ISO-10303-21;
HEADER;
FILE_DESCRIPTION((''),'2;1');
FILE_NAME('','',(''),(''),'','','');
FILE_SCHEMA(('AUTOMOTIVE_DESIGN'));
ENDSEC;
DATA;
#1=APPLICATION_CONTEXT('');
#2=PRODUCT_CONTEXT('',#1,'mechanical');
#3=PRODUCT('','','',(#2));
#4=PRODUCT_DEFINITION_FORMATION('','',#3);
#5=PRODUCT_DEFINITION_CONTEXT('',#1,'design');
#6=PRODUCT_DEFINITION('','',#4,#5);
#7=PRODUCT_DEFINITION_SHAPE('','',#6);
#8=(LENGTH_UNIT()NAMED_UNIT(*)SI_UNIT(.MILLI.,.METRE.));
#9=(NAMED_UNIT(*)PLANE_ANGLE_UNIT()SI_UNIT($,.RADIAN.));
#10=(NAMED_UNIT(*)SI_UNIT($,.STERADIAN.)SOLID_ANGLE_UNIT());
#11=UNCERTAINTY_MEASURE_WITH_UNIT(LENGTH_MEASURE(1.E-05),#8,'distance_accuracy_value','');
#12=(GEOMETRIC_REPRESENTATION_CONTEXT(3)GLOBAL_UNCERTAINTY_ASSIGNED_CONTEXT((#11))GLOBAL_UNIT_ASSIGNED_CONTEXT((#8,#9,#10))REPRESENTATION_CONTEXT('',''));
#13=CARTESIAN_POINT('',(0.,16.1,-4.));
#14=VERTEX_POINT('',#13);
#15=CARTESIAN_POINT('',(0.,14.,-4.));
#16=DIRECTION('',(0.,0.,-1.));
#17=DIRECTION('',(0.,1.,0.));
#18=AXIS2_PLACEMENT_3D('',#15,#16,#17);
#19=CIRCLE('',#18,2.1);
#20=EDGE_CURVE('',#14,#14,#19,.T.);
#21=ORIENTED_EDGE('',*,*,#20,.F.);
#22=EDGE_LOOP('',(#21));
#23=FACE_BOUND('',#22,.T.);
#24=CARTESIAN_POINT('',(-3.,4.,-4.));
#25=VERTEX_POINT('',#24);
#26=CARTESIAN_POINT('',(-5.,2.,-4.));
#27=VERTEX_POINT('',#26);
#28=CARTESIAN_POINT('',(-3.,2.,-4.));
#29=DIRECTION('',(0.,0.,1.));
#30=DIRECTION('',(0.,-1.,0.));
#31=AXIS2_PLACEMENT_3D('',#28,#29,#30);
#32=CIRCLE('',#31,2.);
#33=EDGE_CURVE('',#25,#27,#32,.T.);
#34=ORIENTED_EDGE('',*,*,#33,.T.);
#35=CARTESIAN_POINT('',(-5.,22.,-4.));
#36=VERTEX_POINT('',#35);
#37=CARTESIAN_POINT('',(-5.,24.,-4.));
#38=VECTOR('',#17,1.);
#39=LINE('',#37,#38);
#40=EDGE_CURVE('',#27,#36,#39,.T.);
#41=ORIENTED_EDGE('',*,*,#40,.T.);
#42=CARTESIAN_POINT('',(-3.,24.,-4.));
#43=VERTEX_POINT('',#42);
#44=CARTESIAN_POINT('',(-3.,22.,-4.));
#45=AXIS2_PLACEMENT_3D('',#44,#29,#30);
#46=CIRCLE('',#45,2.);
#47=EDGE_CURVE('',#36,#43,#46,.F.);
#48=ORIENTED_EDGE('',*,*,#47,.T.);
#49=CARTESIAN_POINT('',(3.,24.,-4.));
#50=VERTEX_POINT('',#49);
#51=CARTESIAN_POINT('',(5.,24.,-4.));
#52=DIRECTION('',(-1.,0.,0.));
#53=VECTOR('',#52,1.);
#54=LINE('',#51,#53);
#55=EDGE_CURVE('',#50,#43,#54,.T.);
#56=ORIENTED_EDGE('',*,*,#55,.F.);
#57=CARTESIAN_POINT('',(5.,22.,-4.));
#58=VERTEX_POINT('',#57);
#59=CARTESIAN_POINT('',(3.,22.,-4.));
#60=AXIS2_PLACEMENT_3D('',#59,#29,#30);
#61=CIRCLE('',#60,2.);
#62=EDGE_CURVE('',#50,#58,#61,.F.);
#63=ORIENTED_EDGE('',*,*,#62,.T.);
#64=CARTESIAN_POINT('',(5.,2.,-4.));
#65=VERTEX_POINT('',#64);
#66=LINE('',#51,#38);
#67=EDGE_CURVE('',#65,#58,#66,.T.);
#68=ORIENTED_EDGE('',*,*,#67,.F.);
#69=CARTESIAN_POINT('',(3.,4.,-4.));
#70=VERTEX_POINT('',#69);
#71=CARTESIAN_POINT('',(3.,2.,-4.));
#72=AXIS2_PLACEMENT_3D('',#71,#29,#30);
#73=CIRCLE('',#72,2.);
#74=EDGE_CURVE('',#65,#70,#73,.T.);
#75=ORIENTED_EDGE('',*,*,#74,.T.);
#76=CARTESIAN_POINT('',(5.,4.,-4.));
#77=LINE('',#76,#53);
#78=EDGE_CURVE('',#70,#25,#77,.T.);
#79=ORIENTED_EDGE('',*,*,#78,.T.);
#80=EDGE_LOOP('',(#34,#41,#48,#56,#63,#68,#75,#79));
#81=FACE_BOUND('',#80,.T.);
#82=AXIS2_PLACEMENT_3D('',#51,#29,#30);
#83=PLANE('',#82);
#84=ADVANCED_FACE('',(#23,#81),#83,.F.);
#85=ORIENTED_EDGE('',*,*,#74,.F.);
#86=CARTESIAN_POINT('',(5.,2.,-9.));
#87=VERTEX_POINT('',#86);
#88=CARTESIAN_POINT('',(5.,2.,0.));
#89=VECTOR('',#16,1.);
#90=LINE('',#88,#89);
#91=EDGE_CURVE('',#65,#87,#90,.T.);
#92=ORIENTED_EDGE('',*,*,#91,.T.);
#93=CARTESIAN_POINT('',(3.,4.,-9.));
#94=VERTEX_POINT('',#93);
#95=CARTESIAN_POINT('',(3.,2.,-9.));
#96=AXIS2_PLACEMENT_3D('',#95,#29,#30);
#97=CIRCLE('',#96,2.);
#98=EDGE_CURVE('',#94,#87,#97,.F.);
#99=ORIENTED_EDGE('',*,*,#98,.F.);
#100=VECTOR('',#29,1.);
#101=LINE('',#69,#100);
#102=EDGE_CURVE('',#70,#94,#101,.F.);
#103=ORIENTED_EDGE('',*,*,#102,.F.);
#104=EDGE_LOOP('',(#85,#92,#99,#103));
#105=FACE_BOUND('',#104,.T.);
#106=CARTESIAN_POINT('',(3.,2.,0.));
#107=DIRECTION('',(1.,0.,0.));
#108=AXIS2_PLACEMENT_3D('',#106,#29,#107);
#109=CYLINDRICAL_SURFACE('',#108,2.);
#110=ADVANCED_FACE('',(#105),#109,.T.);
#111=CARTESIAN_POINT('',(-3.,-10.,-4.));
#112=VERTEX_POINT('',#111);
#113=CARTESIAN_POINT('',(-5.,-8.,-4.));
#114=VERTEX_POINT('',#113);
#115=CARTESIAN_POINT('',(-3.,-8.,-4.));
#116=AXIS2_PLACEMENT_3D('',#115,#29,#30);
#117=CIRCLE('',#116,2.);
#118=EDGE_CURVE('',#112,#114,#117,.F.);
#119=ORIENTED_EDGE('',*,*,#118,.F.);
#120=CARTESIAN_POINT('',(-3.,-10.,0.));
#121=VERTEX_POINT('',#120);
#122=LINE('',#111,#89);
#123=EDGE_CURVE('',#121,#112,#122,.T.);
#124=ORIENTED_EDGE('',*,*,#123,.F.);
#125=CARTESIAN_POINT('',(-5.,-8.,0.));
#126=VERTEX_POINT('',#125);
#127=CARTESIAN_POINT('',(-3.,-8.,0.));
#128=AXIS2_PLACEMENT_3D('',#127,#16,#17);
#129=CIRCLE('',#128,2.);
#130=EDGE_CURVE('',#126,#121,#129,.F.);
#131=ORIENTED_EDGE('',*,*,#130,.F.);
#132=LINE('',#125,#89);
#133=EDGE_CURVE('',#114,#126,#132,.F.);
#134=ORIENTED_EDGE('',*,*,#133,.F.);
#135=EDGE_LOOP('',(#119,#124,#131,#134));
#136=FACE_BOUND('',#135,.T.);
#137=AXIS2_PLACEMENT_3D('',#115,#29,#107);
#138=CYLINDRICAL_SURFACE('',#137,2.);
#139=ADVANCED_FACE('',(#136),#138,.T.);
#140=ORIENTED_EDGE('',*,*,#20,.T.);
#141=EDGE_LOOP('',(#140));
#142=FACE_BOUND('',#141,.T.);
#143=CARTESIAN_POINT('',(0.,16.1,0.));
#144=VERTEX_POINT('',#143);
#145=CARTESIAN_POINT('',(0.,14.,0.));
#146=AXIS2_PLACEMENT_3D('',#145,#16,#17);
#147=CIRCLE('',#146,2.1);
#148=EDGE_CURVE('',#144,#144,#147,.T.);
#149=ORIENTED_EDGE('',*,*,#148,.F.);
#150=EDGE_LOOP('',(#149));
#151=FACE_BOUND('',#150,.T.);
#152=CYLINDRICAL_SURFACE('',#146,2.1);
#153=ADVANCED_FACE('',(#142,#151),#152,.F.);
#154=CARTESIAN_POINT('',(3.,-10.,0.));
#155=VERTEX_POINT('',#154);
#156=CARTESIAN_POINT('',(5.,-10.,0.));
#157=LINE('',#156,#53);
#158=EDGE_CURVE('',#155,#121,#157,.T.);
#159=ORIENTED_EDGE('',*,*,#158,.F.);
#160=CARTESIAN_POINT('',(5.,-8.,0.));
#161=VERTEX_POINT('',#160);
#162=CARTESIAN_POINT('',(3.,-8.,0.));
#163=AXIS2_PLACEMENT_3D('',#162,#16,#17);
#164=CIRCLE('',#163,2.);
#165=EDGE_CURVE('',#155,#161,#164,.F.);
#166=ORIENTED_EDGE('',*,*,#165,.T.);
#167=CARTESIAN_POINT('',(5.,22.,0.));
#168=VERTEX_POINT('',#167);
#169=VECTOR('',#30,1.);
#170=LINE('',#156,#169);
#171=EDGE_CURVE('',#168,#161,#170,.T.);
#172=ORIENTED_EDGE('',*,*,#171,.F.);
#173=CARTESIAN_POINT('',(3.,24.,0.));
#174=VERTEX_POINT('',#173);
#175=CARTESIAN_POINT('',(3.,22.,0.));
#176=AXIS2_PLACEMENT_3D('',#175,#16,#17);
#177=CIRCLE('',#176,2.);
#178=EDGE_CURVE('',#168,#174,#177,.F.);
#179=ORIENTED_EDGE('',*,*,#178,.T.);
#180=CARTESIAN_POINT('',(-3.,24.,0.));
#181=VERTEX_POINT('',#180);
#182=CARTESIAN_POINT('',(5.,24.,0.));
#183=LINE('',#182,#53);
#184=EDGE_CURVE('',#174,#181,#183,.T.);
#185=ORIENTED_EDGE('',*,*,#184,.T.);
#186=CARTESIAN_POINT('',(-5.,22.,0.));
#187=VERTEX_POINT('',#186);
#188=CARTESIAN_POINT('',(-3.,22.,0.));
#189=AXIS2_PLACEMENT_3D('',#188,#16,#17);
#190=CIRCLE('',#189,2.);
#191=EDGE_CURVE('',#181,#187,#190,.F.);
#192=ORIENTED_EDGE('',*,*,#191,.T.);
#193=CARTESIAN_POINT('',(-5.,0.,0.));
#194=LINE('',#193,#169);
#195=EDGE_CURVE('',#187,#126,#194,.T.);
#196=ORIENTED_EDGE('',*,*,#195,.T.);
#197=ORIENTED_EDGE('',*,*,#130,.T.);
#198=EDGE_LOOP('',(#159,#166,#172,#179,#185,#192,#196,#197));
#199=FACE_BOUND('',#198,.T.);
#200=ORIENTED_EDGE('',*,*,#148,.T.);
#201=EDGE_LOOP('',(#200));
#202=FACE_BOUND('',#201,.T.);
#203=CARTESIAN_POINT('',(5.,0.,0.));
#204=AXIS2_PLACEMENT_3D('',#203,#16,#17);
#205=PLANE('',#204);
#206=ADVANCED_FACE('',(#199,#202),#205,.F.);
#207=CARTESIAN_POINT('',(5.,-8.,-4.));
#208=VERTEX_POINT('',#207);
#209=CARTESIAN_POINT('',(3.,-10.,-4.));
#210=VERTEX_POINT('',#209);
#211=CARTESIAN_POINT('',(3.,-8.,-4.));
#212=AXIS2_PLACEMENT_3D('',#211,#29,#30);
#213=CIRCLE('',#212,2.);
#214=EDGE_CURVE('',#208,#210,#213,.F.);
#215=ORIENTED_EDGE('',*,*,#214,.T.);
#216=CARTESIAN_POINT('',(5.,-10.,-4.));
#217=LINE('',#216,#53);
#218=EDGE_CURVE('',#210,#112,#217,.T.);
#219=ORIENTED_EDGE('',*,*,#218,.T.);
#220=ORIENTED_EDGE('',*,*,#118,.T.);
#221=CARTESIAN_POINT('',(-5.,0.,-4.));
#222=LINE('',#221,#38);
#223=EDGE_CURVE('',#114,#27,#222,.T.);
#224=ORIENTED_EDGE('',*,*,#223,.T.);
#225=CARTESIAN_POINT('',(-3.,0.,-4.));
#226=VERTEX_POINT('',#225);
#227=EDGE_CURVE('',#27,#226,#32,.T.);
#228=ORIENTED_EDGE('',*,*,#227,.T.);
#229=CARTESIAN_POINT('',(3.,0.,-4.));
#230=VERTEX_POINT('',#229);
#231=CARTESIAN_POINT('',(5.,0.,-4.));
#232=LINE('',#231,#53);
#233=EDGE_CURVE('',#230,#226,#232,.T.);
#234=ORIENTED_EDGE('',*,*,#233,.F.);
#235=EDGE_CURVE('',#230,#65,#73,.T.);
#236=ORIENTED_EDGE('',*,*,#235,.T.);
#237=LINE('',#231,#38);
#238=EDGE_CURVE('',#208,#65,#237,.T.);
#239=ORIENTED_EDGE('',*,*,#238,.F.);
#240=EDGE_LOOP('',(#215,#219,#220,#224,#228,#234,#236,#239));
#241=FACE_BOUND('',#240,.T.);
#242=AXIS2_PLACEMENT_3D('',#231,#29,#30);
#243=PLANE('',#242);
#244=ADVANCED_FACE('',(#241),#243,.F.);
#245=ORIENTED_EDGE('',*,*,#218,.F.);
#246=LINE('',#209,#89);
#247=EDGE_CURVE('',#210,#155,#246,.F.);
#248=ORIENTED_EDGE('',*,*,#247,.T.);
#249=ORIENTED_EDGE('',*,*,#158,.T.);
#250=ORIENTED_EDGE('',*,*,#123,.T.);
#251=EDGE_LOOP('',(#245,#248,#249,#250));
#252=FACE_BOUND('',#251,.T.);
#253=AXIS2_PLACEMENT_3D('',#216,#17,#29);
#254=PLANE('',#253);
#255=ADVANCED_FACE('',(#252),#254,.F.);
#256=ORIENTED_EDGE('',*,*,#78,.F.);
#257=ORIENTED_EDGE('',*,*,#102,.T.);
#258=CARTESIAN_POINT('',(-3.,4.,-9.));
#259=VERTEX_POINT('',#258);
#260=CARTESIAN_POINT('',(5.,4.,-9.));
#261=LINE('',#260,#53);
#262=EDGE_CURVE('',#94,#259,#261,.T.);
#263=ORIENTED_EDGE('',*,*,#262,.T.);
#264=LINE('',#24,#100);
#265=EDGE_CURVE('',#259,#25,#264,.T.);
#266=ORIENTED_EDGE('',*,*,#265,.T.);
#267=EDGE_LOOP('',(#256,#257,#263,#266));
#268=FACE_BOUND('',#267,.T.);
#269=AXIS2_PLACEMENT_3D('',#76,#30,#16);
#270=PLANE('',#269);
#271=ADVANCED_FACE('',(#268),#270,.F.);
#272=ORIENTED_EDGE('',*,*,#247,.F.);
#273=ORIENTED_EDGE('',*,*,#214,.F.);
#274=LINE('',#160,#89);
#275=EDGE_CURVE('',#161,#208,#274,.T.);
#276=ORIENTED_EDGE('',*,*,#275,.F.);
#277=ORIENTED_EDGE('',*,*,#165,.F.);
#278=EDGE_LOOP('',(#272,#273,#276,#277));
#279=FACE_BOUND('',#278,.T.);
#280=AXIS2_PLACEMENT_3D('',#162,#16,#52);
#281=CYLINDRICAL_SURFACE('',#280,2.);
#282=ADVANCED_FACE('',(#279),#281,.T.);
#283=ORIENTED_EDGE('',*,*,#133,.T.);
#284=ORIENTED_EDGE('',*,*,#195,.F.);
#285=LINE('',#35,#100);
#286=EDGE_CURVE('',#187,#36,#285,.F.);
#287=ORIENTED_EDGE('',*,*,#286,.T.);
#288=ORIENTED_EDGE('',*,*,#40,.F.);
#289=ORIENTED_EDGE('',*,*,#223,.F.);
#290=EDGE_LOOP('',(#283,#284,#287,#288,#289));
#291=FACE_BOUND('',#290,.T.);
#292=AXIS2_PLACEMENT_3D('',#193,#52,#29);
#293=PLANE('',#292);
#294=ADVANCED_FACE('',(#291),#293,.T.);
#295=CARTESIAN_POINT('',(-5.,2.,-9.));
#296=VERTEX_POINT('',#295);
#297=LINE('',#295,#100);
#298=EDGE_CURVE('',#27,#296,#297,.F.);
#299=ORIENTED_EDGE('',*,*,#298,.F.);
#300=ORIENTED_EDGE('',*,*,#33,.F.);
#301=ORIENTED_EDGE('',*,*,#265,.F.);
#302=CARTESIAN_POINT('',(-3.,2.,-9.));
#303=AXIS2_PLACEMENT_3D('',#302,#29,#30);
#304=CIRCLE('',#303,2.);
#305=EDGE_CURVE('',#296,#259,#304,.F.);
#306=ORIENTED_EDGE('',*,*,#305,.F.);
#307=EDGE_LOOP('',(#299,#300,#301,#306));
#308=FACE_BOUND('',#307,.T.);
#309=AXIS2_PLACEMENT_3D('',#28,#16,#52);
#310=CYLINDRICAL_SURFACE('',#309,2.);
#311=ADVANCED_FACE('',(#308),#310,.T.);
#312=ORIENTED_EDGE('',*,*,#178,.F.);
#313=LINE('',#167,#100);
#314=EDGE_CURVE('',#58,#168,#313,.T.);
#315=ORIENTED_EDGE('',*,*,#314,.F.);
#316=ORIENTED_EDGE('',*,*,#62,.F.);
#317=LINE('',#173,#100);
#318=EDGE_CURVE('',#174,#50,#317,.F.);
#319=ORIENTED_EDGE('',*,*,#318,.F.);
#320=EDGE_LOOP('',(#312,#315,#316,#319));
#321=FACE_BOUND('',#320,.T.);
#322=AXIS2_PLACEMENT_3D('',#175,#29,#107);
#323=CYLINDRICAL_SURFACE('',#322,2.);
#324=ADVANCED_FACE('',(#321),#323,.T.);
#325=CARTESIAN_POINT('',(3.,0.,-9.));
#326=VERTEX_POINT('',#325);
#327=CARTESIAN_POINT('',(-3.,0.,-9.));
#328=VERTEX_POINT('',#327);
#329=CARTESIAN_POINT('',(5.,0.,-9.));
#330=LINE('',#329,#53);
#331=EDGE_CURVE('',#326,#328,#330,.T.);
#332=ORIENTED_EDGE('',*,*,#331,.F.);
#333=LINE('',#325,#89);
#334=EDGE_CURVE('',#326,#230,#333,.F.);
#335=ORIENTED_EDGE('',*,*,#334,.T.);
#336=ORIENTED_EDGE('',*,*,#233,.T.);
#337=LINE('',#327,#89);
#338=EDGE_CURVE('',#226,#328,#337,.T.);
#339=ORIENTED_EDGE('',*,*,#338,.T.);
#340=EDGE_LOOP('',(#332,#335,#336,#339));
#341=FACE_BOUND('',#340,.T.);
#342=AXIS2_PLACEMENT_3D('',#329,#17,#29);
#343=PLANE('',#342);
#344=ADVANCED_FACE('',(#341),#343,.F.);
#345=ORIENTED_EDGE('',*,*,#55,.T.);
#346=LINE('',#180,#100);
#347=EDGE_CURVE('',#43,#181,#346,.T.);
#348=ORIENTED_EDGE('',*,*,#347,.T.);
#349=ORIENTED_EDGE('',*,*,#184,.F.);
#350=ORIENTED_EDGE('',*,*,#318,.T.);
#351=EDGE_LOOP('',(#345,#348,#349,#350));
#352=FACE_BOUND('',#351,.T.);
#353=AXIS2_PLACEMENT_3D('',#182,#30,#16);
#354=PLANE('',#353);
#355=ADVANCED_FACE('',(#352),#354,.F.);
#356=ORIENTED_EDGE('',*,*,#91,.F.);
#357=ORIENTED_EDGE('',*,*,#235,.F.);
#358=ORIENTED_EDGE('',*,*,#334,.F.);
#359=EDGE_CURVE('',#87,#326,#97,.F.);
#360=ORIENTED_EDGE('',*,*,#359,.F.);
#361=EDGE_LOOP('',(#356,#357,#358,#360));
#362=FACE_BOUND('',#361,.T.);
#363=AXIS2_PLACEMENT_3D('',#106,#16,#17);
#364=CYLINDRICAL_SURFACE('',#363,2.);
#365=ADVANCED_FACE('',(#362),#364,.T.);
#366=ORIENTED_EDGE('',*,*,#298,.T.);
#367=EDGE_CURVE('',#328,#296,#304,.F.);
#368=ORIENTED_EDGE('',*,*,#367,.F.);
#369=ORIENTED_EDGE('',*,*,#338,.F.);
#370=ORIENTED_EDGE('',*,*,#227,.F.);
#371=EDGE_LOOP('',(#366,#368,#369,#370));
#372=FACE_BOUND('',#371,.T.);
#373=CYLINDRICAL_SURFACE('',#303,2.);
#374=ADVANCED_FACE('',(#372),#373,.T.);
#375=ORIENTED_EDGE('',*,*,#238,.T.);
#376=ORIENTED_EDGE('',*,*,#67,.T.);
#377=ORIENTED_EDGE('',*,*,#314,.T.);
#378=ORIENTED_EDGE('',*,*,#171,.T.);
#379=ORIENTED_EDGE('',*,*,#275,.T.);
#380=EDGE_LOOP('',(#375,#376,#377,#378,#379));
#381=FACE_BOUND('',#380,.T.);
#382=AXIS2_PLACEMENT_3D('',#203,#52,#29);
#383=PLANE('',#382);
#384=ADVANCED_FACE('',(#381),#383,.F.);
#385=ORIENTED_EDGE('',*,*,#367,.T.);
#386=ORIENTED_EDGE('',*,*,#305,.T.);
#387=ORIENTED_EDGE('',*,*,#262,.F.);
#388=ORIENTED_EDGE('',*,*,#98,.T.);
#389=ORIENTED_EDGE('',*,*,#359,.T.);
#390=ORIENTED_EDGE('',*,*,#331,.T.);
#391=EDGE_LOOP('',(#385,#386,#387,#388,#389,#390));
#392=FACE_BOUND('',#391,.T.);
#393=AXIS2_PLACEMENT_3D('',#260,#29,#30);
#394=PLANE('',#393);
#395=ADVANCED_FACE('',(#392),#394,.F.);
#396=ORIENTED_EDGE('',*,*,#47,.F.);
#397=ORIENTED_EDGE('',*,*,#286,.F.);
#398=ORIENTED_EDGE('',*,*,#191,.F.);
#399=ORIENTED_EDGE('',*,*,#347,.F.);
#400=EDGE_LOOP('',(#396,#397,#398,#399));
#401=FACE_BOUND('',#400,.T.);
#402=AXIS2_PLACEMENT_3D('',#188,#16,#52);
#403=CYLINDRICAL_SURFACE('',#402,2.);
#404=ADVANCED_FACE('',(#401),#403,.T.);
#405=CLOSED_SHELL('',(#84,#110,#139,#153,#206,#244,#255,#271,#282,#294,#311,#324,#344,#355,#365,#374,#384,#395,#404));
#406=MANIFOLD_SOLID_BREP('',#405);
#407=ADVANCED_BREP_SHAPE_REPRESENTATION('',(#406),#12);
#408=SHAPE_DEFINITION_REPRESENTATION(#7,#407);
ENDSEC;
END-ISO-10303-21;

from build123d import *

# Parameters (mm, degrees)
EXTRUDE_1_DEPTH     = 5
FILLET_1_R          = 2
SKETCH_2_R          = 2.1
CUT_EXTRUDE_1_DEPTH = 26.019992006


with BuildPart() as part:
    # Эскиз1 → Бобышка-Вытянуть1 (new, symmetric)
    with BuildSketch(Plane(origin=(0, 0, 0), x_dir=(0, 0, -1), z_dir=(1, 0, 0))):
        Polygon((0, 0), (0, 24), (4, 24), (4, 4), (9, 4), (9, 0), (4, 0), (4, -10), (0, -10), align=None)
    extrude(amount=EXTRUDE_1_DEPTH, both=True)

    # Скругление1
    fillet_1_edges = [part.edges().sort_by_distance(p)[0] for p in [
        (-5, 0, -6.5),
        (-5, 4, -6.5),
        (5, 4, -6.5),
        (5, 0, -6.5),
        (5, 24, -2),
        (-5, 24, -2),
        (-5, -10, -2),
        (5, -10, -2),
    ]]
    fillet(fillet_1_edges, radius=FILLET_1_R - 0.0001)  # a hair under: the kernel refuses the full size

    # Эскиз2 → Вырез-Вытянуть1 (cut, through all)
    with BuildSketch(Plane(origin=(0, 0, -4), x_dir=(-1, 0, 0), z_dir=(0, 0, -1))):
        with Locations(Location((0, 14, 0), (0, 0, 90))):
            Circle(SKETCH_2_R)
    extrude(amount=-CUT_EXTRUDE_1_DEPTH, mode=Mode.SUBTRACT)


solid = part.part
